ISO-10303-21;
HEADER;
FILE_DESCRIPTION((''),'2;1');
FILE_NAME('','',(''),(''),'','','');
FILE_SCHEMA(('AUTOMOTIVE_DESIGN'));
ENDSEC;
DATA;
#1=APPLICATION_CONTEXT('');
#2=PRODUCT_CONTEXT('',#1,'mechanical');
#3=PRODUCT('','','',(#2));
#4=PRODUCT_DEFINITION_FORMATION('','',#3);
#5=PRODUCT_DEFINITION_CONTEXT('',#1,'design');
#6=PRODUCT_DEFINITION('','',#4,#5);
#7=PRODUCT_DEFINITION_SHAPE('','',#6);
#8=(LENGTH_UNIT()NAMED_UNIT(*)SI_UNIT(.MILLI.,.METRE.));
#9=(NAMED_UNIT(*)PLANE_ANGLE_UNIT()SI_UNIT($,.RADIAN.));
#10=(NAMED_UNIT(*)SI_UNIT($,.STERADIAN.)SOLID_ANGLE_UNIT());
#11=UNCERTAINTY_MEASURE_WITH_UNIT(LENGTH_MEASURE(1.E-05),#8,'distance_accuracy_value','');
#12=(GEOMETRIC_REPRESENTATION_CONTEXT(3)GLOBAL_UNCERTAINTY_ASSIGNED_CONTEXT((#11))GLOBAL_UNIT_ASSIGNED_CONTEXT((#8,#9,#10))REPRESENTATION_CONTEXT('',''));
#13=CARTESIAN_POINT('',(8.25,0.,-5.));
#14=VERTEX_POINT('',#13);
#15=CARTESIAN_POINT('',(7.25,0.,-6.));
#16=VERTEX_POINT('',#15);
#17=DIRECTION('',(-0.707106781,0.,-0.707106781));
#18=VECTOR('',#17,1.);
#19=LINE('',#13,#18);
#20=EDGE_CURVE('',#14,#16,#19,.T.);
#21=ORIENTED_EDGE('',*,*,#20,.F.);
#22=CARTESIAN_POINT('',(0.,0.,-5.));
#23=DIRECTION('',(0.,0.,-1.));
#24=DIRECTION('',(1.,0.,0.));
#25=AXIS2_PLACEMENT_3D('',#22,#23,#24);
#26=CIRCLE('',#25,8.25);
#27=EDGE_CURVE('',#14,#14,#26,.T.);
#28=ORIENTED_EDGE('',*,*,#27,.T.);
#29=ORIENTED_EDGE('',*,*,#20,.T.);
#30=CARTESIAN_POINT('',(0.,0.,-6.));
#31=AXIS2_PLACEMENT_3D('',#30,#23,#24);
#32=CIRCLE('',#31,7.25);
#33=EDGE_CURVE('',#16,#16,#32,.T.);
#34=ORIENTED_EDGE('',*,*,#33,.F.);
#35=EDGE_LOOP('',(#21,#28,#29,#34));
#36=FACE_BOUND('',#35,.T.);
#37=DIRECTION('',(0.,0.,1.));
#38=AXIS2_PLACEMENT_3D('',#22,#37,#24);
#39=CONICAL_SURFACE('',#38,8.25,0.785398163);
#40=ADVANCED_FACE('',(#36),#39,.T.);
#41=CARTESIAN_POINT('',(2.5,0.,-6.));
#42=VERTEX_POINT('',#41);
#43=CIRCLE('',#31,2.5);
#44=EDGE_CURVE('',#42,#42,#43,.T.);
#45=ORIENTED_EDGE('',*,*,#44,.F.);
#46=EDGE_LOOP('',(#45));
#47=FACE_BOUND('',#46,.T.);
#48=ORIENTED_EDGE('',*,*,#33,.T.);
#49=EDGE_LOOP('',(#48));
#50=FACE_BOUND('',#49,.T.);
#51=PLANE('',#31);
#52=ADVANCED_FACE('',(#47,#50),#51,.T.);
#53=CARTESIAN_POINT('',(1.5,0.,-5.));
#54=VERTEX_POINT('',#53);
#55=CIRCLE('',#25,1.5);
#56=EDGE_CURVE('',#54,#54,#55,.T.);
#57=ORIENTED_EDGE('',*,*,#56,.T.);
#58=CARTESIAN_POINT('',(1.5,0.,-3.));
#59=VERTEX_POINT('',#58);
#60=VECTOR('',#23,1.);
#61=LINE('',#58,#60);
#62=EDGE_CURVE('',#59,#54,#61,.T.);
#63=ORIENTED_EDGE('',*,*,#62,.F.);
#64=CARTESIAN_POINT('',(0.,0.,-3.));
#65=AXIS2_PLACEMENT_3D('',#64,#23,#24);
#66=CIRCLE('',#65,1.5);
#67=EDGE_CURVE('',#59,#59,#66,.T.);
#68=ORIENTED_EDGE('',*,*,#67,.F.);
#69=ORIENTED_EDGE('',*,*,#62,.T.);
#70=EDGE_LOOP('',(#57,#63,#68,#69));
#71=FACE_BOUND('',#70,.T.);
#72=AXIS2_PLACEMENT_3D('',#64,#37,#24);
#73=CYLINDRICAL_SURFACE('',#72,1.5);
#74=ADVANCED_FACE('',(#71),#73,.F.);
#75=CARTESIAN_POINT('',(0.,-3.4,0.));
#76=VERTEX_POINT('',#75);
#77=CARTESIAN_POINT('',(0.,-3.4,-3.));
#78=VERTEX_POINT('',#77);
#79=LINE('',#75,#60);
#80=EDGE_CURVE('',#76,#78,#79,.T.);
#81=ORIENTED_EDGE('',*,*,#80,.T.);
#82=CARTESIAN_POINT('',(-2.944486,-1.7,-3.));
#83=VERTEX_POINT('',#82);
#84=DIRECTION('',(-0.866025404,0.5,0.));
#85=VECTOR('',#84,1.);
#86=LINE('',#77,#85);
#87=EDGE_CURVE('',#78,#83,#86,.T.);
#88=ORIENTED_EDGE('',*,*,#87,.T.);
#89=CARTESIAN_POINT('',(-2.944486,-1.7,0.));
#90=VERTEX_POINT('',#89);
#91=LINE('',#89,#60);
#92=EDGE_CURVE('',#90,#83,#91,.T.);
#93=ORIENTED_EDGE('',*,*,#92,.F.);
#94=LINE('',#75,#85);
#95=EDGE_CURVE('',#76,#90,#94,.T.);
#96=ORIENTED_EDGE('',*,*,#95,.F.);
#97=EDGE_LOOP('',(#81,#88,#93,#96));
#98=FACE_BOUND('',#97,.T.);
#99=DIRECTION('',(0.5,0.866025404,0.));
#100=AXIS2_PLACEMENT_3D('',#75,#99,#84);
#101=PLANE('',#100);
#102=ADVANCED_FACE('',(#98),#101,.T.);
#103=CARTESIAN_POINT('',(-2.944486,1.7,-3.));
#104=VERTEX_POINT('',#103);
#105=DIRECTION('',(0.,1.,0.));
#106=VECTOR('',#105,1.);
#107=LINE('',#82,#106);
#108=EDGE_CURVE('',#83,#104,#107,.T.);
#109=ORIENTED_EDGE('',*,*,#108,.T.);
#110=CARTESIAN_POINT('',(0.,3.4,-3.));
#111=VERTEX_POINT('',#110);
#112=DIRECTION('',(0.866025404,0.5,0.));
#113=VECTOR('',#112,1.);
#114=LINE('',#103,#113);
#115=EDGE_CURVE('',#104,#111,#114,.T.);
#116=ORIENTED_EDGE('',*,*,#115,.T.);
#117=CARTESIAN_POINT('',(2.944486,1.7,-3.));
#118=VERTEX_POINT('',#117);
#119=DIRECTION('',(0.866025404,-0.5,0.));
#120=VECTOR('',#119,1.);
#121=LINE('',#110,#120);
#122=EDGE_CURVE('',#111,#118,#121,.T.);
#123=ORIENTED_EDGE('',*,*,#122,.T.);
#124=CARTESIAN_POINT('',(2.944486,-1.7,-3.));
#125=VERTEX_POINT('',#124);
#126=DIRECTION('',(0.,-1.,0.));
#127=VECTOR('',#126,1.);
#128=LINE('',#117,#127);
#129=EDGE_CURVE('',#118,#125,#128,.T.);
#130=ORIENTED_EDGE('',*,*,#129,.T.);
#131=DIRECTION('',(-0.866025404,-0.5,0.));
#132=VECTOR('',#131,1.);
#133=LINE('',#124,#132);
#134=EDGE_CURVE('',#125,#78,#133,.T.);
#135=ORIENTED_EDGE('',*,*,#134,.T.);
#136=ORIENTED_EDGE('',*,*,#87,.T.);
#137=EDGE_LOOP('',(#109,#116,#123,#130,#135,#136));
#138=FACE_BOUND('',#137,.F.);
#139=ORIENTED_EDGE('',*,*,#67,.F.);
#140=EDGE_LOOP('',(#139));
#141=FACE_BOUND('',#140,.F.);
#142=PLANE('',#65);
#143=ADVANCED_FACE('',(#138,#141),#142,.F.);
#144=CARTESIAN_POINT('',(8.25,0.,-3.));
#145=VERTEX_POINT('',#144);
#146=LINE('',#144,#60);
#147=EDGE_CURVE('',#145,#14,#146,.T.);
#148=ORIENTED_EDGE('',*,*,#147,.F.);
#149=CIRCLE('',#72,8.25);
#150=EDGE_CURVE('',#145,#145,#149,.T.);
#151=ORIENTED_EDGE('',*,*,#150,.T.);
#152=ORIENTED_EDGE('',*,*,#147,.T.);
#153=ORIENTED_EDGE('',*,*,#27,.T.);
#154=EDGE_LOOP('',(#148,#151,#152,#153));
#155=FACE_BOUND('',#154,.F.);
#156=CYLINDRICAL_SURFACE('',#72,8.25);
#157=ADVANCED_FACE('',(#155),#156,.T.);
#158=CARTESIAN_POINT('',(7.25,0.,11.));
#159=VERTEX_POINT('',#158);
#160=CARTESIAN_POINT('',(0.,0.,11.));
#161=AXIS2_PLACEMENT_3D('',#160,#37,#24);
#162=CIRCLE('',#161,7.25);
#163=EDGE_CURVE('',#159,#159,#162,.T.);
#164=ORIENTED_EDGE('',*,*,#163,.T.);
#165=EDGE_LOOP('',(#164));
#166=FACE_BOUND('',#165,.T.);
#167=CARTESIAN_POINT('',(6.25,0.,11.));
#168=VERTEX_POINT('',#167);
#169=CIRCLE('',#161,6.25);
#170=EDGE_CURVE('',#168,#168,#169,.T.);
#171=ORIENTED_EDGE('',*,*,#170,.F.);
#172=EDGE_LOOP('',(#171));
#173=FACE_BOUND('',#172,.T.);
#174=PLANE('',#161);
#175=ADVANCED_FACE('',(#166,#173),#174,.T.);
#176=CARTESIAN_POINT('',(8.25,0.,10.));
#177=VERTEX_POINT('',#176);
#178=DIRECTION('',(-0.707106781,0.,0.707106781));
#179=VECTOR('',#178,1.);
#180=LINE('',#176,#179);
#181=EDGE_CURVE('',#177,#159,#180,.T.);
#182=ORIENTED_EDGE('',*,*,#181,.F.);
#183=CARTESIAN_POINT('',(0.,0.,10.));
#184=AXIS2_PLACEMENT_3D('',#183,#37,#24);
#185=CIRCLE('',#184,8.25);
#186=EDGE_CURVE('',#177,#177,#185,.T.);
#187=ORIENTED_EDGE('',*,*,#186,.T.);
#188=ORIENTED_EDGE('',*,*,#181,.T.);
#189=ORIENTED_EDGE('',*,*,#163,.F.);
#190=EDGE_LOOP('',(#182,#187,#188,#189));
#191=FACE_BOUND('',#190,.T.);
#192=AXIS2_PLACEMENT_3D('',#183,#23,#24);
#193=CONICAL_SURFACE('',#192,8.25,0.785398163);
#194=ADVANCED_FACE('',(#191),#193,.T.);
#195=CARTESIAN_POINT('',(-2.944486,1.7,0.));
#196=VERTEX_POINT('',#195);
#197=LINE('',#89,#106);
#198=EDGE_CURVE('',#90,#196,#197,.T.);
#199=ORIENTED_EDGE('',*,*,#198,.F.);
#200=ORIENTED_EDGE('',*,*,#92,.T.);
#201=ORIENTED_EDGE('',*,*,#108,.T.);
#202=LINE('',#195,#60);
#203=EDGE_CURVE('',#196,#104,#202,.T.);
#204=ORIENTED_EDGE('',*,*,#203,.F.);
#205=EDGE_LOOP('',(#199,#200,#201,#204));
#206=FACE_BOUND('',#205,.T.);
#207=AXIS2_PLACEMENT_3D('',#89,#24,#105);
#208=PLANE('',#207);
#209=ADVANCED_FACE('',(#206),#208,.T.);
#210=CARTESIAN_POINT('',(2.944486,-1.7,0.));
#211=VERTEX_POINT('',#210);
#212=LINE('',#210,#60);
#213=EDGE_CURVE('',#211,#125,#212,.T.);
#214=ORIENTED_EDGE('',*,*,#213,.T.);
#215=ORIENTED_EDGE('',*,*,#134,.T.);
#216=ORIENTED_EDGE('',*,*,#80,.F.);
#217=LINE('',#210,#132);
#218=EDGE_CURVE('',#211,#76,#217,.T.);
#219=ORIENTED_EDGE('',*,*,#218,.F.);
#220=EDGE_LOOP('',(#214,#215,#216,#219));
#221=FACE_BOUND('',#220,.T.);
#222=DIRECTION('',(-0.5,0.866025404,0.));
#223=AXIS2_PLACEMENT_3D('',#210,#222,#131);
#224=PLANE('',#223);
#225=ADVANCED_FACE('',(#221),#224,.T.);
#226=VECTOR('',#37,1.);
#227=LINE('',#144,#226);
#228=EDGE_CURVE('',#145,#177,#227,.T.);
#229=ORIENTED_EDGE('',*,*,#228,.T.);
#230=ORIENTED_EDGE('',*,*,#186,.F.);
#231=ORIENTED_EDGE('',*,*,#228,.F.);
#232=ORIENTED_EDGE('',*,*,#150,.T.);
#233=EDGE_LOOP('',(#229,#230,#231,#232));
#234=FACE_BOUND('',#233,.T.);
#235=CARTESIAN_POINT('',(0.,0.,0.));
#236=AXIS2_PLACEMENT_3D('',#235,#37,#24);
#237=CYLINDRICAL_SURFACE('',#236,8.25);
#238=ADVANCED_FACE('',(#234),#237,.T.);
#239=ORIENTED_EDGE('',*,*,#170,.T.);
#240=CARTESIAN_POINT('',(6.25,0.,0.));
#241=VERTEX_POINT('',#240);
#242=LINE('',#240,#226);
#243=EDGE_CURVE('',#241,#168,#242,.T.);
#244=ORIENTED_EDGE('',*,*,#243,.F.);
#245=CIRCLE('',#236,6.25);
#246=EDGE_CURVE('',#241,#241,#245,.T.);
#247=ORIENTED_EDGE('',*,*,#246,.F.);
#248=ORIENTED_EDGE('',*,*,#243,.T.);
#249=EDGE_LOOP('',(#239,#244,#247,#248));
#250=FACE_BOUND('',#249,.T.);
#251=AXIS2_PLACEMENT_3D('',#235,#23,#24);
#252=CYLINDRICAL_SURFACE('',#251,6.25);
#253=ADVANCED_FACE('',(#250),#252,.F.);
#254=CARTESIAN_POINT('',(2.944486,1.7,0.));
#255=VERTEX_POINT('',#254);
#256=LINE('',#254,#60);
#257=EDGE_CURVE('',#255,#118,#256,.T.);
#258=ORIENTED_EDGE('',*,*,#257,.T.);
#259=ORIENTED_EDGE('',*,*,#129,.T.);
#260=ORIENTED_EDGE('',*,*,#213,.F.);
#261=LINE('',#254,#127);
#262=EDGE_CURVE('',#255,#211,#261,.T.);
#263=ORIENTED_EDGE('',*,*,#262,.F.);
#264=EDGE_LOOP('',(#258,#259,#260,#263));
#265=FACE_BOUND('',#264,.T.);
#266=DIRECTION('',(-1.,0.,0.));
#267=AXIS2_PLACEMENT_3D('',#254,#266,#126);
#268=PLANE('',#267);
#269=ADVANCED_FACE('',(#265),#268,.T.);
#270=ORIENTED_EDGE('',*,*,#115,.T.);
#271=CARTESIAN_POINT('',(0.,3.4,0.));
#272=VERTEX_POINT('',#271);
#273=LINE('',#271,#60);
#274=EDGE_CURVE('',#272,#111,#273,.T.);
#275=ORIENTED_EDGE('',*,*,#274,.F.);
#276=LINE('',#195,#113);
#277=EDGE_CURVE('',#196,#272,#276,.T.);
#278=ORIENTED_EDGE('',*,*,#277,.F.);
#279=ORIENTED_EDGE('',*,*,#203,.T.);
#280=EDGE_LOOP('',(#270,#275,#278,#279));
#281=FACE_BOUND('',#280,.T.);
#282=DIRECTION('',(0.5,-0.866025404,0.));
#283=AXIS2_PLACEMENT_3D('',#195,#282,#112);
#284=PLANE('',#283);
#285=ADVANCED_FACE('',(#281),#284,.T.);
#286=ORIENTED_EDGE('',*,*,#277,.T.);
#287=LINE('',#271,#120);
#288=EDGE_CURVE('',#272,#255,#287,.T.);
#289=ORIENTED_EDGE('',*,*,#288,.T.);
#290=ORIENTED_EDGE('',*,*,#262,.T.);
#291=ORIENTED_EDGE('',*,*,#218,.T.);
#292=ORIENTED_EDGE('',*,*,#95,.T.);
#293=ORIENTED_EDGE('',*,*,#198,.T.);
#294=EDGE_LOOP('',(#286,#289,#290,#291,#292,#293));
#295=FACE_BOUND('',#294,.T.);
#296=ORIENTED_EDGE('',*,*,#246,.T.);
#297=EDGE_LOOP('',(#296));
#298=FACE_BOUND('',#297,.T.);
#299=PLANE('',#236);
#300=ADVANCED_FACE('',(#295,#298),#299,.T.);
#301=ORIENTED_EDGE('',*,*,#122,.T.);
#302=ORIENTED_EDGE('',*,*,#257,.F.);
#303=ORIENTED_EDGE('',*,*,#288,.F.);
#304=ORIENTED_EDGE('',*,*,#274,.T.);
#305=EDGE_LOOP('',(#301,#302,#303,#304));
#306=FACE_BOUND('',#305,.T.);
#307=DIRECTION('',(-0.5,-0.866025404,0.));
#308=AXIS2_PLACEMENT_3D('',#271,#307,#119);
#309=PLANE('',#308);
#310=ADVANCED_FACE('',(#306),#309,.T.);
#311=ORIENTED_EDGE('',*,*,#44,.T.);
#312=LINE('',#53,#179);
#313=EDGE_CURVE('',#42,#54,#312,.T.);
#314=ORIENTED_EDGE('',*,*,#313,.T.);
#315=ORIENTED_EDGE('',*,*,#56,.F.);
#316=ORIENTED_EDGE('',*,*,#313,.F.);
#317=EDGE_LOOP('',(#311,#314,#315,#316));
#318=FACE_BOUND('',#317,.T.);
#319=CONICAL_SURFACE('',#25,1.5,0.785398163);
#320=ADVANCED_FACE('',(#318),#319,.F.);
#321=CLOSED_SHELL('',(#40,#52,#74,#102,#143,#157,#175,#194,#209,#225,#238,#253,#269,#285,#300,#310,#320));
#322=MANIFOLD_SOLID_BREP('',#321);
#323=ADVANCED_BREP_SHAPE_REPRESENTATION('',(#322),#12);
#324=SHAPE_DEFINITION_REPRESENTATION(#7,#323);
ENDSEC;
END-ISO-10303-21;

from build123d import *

# Parameters (mm, degrees)
F0_R     = 8.25
F0_R_2   = 6.25
F1_DEPTH = 11
F2_DEPTH = 3
F3_R     = 8.25
F3_R_2   = 1.5
F4_DEPTH = 3
F5_SIZE  = 1


with BuildPart() as f1:
    # F0 (on Top) → F1 (new body)
    with BuildSketch(Plane.XY):
        Circle(F0_R)
        Circle(F0_R_2, mode=Mode.SUBTRACT)
    extrude(amount=F1_DEPTH)

    # F0 (on Top) → F2 (join)
    with BuildSketch(Plane.XY):
        Circle(F0_R)
        Circle(F0_R_2, mode=Mode.SUBTRACT)
        Circle(F0_R_2)
        Polygon((2.9444863729, -1.7), (0, -3.4), (-2.9444863729, -1.7), (-2.9444863729, 1.7), (0, 3.4), (2.9444863729, 1.7), align=None, mode=Mode.SUBTRACT)
    extrude(amount=-F2_DEPTH)

    # F3 (on face) → F4 (join)
    with BuildSketch(Plane(origin=(0, 0, -3), x_dir=(1, 0, 0), z_dir=(0, 0, -1))):
        Circle(F3_R)
        Polygon((0, 3.4), (2.9444863729, 1.7), (2.9444863729, -1.7), (0, -3.4), (-2.9444863729, -1.7), (-2.9444863729, 1.7), align=None, mode=Mode.SUBTRACT)
        Polygon((2.9444863729, -1.7), (2.9444863729, 1.7), (0, 3.4), (-2.9444863729, 1.7), (-2.9444863729, -1.7), (0, -3.4), align=None)
        Circle(F3_R_2, mode=Mode.SUBTRACT)
    extrude(amount=F4_DEPTH)

    # F5
    f5_edges = [f1.edges().sort_by_distance(p)[0] for p in [
        (-8.25, 0, 11),
        (-8.25, 0, -6),
        (-1.5, 0, -6),
    ]]
    chamfer(f5_edges, length=F5_SIZE)


solid = f1.part
